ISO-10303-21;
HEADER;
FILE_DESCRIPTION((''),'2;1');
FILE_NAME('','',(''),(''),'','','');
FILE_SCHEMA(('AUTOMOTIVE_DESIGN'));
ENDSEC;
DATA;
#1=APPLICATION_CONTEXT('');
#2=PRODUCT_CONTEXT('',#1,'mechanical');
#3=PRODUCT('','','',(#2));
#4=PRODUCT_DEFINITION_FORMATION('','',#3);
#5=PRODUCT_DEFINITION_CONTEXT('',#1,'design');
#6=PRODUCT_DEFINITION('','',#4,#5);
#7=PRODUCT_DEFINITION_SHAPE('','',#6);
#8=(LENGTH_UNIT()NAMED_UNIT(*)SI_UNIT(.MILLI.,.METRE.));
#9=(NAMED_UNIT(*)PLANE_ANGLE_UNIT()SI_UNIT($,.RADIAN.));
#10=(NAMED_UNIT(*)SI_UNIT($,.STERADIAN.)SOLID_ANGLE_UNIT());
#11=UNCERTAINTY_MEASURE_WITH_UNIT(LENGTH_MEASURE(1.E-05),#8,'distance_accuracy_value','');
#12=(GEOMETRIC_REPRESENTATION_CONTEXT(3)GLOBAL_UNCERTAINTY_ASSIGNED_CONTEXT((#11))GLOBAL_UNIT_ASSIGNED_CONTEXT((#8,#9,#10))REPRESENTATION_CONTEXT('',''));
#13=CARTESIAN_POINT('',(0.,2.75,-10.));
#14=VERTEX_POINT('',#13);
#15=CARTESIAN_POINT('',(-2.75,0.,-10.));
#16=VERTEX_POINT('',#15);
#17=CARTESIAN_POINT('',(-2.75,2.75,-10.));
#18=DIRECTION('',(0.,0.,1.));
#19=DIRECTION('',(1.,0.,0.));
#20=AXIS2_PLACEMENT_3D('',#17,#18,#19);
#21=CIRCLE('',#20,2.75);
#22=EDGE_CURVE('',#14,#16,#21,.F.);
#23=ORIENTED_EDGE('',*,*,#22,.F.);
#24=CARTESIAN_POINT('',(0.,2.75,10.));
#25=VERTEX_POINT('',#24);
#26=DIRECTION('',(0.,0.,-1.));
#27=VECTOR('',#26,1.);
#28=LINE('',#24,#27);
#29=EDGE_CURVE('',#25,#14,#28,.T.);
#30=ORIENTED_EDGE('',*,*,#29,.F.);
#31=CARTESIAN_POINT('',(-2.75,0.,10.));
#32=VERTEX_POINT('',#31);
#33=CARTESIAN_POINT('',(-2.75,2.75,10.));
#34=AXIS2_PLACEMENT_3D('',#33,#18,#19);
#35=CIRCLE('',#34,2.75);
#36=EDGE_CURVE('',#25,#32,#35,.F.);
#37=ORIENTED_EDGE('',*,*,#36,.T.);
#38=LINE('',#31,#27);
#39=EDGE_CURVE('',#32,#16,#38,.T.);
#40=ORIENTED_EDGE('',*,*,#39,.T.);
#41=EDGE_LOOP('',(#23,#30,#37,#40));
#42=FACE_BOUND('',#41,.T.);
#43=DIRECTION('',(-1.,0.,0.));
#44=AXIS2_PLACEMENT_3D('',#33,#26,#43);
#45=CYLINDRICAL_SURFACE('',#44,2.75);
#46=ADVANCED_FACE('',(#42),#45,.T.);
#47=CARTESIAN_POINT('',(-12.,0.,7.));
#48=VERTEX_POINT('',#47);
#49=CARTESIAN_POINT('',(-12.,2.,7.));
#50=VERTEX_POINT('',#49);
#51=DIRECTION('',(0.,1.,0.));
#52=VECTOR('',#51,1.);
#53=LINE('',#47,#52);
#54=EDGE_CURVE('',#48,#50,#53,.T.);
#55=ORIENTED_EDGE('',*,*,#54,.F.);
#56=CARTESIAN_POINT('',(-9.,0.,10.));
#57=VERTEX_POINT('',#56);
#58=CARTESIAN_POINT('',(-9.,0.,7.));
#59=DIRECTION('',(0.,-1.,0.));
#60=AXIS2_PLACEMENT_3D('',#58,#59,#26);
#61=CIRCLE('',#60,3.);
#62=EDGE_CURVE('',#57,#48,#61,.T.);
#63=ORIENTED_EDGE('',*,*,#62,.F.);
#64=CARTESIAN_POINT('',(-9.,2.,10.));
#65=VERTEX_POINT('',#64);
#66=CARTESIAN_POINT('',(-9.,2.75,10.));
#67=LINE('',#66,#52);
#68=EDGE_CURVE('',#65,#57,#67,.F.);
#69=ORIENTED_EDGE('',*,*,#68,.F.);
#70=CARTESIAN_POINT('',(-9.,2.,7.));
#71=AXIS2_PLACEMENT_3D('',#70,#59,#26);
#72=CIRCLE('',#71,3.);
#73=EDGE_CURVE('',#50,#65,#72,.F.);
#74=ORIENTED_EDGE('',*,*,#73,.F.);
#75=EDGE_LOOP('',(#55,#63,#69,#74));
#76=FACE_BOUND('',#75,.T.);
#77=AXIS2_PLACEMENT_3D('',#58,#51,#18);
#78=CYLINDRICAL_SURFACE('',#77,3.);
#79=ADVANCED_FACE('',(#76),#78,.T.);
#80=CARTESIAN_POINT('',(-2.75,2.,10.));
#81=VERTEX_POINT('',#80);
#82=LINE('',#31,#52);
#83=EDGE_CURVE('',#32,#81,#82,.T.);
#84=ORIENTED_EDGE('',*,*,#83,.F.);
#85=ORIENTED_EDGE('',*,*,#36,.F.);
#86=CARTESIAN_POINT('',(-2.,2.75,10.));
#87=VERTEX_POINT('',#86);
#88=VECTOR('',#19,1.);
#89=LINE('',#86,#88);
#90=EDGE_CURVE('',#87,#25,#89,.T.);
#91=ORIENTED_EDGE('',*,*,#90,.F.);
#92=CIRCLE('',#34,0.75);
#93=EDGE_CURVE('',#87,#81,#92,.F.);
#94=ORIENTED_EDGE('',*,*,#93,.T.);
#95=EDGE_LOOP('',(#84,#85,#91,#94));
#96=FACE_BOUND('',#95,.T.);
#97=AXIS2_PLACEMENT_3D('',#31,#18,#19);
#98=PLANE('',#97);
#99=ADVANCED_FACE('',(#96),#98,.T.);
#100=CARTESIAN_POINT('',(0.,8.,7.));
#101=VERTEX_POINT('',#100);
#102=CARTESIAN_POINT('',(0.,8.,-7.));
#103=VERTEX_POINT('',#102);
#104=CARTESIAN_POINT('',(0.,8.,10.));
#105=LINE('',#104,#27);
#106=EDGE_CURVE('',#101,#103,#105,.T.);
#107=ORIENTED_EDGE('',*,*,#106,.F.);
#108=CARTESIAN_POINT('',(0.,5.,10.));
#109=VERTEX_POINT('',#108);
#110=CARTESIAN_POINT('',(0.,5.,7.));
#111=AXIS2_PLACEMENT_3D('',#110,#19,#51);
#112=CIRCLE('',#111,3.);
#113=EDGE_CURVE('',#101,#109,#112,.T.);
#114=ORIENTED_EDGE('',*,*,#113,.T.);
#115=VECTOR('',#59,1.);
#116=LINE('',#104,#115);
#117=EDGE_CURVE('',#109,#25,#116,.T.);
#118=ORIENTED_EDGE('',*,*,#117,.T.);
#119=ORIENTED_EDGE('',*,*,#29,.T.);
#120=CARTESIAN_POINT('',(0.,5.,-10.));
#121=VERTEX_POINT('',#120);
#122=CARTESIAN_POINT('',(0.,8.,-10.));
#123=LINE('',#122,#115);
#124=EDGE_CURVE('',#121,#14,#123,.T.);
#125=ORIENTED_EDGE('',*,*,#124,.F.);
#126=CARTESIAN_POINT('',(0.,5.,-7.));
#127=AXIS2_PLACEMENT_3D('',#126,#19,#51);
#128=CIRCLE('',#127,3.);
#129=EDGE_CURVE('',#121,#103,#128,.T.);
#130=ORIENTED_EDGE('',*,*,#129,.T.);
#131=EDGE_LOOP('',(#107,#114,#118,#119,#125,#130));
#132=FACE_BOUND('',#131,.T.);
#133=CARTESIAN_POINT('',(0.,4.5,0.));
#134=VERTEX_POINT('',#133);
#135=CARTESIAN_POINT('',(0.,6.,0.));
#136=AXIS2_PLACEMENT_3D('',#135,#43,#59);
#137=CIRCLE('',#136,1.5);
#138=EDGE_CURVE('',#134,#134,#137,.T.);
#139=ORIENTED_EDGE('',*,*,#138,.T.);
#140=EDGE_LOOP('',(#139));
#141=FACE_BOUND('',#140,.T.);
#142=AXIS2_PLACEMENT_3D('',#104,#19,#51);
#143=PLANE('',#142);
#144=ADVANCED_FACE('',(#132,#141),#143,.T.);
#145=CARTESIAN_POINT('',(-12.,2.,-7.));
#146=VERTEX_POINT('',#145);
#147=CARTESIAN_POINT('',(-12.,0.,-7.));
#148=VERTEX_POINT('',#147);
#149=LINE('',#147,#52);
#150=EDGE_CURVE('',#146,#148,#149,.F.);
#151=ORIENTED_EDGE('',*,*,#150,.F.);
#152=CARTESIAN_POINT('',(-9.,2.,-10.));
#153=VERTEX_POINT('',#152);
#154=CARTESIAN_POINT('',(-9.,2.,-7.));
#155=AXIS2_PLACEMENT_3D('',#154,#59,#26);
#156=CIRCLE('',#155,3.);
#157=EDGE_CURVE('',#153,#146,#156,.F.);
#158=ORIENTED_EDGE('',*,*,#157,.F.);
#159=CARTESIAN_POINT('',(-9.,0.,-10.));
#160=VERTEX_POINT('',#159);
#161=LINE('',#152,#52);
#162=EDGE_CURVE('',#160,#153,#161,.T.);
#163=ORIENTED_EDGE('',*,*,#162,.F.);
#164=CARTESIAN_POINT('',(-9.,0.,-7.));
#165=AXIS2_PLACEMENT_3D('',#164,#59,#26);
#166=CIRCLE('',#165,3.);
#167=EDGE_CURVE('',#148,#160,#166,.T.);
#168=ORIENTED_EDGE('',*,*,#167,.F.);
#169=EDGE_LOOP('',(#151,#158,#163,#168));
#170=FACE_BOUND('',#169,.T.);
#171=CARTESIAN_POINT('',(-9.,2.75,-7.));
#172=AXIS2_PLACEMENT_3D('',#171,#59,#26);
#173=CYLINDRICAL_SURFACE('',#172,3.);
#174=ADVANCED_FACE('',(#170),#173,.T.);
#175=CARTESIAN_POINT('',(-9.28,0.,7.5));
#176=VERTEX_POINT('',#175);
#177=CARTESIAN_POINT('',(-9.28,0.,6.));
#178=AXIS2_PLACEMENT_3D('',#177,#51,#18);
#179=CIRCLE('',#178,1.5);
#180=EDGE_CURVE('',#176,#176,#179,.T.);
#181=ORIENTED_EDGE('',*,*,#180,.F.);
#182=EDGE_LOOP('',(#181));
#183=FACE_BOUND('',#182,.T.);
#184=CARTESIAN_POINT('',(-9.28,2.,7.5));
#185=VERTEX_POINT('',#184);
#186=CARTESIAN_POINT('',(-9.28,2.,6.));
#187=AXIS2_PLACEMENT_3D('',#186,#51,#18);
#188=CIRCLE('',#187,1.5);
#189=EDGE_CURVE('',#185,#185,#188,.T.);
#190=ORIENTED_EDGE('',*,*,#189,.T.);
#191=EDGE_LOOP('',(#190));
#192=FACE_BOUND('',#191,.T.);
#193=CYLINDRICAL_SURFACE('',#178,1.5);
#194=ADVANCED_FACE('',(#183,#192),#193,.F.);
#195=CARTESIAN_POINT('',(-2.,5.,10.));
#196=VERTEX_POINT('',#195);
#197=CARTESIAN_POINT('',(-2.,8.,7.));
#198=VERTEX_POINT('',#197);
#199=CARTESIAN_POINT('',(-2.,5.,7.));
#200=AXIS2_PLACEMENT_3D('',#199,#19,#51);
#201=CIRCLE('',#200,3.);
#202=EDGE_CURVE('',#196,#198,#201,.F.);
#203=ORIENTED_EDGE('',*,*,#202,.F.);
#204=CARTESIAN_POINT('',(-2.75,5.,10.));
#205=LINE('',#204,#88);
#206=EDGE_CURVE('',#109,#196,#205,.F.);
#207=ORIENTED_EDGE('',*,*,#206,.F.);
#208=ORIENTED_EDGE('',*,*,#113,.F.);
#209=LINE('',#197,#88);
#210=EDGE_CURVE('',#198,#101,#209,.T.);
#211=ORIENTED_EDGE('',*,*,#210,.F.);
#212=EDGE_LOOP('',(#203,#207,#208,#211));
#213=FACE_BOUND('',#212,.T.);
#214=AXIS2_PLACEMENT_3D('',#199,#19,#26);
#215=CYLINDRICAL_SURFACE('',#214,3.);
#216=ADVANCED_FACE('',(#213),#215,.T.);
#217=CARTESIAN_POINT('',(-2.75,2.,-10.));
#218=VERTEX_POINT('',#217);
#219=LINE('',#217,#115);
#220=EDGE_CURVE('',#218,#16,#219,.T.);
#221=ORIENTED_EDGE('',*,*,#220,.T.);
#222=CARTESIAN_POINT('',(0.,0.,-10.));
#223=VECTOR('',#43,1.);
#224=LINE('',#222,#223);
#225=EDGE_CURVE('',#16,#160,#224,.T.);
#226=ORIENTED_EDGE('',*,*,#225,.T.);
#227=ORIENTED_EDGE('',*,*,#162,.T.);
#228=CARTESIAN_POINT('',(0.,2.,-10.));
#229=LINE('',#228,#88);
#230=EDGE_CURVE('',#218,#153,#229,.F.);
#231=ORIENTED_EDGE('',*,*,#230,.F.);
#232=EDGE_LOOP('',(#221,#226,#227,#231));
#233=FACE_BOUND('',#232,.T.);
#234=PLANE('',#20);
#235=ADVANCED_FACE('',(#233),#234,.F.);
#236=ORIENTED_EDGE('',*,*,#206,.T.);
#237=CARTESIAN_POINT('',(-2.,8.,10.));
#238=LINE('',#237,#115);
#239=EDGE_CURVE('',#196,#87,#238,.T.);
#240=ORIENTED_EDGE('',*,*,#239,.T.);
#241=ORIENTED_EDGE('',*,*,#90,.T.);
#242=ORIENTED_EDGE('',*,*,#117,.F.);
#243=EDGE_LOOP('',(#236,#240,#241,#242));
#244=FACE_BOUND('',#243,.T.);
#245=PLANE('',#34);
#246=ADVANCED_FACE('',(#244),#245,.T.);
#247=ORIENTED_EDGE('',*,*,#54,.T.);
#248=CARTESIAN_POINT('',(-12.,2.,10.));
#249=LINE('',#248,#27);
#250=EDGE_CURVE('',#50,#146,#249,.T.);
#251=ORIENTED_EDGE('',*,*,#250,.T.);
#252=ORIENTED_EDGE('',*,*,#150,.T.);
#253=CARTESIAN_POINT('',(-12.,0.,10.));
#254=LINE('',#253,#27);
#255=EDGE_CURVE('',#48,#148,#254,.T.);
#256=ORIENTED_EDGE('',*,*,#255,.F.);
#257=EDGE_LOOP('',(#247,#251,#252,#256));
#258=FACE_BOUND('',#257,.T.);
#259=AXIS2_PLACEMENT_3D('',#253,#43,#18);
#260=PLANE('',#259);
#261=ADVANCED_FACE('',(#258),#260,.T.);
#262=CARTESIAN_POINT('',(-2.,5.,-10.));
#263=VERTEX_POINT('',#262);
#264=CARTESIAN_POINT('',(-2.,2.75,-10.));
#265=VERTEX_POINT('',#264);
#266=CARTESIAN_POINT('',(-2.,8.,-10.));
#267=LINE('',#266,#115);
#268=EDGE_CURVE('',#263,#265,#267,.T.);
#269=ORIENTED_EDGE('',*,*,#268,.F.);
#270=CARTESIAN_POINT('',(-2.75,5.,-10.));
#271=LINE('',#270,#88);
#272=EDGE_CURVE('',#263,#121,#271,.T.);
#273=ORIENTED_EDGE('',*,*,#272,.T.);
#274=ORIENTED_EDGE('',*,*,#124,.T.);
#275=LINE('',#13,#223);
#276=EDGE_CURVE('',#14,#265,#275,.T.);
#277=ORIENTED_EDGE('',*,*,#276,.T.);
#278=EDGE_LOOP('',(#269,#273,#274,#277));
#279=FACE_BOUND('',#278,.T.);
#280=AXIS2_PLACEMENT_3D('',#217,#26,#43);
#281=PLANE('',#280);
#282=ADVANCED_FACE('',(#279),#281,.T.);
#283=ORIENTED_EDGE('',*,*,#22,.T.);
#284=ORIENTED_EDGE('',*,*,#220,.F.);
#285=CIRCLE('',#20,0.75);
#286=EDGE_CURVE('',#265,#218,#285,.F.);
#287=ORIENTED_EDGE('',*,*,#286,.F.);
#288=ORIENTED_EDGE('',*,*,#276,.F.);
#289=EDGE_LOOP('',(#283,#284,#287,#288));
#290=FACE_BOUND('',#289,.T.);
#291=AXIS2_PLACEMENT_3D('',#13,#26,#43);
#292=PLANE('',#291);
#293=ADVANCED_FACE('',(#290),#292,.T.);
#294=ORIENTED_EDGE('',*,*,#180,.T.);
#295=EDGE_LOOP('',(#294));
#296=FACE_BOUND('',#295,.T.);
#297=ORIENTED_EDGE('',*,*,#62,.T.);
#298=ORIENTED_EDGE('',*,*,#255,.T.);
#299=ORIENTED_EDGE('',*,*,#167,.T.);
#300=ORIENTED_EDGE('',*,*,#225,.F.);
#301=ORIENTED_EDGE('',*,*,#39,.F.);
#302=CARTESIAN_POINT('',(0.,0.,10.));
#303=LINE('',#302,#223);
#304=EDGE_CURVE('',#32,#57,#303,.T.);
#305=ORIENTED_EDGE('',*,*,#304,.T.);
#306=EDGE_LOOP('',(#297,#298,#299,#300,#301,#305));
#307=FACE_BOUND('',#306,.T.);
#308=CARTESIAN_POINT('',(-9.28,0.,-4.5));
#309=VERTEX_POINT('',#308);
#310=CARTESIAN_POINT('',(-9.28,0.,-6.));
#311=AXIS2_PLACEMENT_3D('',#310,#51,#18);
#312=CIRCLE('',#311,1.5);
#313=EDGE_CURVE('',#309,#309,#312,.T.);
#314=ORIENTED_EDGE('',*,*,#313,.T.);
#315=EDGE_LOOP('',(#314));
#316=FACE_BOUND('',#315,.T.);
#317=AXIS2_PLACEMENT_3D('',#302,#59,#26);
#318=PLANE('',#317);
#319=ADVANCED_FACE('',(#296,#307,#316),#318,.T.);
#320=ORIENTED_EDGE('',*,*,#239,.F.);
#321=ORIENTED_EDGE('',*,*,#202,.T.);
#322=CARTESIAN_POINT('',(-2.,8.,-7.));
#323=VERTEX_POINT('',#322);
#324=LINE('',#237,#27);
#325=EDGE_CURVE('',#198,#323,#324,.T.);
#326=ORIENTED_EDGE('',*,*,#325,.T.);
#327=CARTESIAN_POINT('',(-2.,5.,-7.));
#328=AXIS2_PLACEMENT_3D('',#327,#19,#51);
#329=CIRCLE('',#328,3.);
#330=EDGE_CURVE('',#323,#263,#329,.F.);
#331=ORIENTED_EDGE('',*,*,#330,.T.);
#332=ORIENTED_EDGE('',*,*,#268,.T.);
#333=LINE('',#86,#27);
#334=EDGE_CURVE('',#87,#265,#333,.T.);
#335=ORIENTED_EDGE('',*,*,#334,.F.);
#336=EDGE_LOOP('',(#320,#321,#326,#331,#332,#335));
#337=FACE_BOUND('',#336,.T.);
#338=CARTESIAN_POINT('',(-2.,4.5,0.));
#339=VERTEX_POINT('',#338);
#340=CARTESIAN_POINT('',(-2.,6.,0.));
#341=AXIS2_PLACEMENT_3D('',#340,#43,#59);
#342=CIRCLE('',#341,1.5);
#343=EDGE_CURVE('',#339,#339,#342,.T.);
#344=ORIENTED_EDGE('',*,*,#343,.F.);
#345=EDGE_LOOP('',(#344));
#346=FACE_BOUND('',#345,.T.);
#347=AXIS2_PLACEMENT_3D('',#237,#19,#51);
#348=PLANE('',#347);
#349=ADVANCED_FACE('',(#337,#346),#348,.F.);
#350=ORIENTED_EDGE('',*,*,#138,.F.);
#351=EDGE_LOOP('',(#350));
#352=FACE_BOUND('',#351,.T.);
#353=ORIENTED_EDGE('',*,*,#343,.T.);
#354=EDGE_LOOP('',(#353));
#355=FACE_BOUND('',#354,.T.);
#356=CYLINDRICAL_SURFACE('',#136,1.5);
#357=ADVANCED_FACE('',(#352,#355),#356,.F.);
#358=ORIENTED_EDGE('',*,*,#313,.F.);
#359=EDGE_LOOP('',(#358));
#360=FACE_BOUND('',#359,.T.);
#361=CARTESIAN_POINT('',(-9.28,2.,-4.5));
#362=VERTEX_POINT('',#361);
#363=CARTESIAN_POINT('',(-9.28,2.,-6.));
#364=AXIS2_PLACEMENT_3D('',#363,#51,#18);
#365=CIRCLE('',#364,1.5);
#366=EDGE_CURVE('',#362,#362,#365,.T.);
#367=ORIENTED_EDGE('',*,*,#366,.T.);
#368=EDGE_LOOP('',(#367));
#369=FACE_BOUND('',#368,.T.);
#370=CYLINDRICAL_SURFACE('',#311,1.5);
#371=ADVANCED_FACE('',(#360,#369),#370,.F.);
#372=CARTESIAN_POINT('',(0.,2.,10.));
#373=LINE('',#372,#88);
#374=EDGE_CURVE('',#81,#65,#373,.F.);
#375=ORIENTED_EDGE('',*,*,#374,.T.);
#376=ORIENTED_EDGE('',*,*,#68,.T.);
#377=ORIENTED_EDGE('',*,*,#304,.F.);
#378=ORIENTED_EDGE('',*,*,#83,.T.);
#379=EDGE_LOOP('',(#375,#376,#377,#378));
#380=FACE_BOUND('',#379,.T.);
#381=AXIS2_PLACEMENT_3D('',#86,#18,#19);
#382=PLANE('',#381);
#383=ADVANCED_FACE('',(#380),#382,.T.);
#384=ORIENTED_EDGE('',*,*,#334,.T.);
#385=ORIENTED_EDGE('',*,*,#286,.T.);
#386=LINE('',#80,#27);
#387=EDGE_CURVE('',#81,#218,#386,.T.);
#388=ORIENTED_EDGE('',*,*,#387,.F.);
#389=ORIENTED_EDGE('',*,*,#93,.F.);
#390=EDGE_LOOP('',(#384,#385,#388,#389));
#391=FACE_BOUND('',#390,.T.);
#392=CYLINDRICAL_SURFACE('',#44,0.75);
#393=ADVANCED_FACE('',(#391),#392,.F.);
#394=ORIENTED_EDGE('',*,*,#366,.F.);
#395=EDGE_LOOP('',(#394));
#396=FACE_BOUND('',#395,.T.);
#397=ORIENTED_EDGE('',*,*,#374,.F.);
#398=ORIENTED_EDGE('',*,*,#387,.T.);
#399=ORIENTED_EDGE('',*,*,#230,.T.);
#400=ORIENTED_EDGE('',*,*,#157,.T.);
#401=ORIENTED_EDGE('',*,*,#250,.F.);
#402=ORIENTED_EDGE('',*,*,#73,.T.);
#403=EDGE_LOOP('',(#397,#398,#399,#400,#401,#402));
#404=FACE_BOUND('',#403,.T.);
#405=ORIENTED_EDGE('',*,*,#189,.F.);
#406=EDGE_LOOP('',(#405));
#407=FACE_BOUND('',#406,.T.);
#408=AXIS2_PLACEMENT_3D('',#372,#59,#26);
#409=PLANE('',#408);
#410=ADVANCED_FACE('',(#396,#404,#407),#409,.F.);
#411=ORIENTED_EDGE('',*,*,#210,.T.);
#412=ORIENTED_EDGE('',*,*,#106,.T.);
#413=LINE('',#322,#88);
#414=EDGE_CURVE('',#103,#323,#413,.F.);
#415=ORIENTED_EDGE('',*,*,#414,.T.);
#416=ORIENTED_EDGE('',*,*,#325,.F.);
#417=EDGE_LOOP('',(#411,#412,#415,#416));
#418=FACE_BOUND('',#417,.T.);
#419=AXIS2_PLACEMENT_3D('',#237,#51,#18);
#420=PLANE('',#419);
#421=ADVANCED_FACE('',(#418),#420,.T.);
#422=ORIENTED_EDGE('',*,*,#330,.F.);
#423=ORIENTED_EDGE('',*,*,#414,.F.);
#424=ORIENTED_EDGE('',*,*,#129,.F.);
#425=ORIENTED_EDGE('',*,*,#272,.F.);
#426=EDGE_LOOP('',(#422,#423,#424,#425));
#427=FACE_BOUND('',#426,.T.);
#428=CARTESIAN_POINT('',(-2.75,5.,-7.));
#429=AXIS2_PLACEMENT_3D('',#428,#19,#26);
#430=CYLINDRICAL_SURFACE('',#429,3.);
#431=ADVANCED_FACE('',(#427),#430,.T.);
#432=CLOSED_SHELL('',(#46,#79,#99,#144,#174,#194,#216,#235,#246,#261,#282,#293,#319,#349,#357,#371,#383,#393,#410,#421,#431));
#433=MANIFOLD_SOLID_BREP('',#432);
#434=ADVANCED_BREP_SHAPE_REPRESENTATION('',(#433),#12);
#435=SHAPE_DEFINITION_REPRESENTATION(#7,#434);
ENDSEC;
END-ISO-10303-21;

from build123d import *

# Parameters (mm, degrees)
BASE_FLANGE1_DEPTH = 10
FILLET1_R          = 3
SKETCH5_R          = 1.5
CUT_EXTRUDE1_DEPTH = 17.733200531
SKETCH6_R          = 1.5
CUT_EXTRUDE2_DEPTH = 17.248076809


# Sheet-metal steps are written as plain solids
with BuildPart() as part:
    # Sketch2 → Base-Flange1 (new, symmetric)
    with BuildSketch(Plane.XY):
        with BuildLine():
            Line((0, 8), (0, 2.75))
            ThreePointArc((0, 2.75), (-0.805456352, 0.805456352), (-2.75, 0))
            Line((-2.75, 0), (-12, 0))
            Line((-12, 0), (-12, 2))
            Line((-12, 2), (-2.75, 2))
            ThreePointArc((-2.75, 2), (-2.219669914, 2.219669914), (-2, 2.75))
            Line((-2, 2.75), (-2, 8))
            Line((-2, 8), (0, 8))
        make_face()
    extrude(amount=BASE_FLANGE1_DEPTH, both=True)

    # Fillet1
    fillet1_edges = [part.edges().sort_by_distance(p)[0] for p in [
        (-1, 8, 10),
        (-1, 8, -10),
        (-12, 1, 10),
        (-12, 1, -10),
    ]]
    fillet(fillet1_edges, radius=FILLET1_R)

    # Sketch5 → Cut-Extrude1 (cut, through all)
    with BuildSketch(Plane(origin=(0, 2, 0), x_dir=(1, 0, 0), z_dir=(0, 1, 0))):
        with Locations(Location((-9.28, 6, 0), (0, 0, 270))):
            Circle(SKETCH5_R)
        with Locations(Location((-9.28, -6, 0), (0, 0, 270))):
            Circle(SKETCH5_R)
    extrude(amount=-CUT_EXTRUDE1_DEPTH, mode=Mode.SUBTRACT)

    # Sketch6 → Cut-Extrude2 (cut, through all)
    with BuildSketch(Plane.ZY.offset(2)):
        with Locations(Location((0, 6, 0), (0, 0, 270))):
            Circle(SKETCH6_R)
    extrude(amount=-CUT_EXTRUDE2_DEPTH, mode=Mode.SUBTRACT)


solid = part.part
